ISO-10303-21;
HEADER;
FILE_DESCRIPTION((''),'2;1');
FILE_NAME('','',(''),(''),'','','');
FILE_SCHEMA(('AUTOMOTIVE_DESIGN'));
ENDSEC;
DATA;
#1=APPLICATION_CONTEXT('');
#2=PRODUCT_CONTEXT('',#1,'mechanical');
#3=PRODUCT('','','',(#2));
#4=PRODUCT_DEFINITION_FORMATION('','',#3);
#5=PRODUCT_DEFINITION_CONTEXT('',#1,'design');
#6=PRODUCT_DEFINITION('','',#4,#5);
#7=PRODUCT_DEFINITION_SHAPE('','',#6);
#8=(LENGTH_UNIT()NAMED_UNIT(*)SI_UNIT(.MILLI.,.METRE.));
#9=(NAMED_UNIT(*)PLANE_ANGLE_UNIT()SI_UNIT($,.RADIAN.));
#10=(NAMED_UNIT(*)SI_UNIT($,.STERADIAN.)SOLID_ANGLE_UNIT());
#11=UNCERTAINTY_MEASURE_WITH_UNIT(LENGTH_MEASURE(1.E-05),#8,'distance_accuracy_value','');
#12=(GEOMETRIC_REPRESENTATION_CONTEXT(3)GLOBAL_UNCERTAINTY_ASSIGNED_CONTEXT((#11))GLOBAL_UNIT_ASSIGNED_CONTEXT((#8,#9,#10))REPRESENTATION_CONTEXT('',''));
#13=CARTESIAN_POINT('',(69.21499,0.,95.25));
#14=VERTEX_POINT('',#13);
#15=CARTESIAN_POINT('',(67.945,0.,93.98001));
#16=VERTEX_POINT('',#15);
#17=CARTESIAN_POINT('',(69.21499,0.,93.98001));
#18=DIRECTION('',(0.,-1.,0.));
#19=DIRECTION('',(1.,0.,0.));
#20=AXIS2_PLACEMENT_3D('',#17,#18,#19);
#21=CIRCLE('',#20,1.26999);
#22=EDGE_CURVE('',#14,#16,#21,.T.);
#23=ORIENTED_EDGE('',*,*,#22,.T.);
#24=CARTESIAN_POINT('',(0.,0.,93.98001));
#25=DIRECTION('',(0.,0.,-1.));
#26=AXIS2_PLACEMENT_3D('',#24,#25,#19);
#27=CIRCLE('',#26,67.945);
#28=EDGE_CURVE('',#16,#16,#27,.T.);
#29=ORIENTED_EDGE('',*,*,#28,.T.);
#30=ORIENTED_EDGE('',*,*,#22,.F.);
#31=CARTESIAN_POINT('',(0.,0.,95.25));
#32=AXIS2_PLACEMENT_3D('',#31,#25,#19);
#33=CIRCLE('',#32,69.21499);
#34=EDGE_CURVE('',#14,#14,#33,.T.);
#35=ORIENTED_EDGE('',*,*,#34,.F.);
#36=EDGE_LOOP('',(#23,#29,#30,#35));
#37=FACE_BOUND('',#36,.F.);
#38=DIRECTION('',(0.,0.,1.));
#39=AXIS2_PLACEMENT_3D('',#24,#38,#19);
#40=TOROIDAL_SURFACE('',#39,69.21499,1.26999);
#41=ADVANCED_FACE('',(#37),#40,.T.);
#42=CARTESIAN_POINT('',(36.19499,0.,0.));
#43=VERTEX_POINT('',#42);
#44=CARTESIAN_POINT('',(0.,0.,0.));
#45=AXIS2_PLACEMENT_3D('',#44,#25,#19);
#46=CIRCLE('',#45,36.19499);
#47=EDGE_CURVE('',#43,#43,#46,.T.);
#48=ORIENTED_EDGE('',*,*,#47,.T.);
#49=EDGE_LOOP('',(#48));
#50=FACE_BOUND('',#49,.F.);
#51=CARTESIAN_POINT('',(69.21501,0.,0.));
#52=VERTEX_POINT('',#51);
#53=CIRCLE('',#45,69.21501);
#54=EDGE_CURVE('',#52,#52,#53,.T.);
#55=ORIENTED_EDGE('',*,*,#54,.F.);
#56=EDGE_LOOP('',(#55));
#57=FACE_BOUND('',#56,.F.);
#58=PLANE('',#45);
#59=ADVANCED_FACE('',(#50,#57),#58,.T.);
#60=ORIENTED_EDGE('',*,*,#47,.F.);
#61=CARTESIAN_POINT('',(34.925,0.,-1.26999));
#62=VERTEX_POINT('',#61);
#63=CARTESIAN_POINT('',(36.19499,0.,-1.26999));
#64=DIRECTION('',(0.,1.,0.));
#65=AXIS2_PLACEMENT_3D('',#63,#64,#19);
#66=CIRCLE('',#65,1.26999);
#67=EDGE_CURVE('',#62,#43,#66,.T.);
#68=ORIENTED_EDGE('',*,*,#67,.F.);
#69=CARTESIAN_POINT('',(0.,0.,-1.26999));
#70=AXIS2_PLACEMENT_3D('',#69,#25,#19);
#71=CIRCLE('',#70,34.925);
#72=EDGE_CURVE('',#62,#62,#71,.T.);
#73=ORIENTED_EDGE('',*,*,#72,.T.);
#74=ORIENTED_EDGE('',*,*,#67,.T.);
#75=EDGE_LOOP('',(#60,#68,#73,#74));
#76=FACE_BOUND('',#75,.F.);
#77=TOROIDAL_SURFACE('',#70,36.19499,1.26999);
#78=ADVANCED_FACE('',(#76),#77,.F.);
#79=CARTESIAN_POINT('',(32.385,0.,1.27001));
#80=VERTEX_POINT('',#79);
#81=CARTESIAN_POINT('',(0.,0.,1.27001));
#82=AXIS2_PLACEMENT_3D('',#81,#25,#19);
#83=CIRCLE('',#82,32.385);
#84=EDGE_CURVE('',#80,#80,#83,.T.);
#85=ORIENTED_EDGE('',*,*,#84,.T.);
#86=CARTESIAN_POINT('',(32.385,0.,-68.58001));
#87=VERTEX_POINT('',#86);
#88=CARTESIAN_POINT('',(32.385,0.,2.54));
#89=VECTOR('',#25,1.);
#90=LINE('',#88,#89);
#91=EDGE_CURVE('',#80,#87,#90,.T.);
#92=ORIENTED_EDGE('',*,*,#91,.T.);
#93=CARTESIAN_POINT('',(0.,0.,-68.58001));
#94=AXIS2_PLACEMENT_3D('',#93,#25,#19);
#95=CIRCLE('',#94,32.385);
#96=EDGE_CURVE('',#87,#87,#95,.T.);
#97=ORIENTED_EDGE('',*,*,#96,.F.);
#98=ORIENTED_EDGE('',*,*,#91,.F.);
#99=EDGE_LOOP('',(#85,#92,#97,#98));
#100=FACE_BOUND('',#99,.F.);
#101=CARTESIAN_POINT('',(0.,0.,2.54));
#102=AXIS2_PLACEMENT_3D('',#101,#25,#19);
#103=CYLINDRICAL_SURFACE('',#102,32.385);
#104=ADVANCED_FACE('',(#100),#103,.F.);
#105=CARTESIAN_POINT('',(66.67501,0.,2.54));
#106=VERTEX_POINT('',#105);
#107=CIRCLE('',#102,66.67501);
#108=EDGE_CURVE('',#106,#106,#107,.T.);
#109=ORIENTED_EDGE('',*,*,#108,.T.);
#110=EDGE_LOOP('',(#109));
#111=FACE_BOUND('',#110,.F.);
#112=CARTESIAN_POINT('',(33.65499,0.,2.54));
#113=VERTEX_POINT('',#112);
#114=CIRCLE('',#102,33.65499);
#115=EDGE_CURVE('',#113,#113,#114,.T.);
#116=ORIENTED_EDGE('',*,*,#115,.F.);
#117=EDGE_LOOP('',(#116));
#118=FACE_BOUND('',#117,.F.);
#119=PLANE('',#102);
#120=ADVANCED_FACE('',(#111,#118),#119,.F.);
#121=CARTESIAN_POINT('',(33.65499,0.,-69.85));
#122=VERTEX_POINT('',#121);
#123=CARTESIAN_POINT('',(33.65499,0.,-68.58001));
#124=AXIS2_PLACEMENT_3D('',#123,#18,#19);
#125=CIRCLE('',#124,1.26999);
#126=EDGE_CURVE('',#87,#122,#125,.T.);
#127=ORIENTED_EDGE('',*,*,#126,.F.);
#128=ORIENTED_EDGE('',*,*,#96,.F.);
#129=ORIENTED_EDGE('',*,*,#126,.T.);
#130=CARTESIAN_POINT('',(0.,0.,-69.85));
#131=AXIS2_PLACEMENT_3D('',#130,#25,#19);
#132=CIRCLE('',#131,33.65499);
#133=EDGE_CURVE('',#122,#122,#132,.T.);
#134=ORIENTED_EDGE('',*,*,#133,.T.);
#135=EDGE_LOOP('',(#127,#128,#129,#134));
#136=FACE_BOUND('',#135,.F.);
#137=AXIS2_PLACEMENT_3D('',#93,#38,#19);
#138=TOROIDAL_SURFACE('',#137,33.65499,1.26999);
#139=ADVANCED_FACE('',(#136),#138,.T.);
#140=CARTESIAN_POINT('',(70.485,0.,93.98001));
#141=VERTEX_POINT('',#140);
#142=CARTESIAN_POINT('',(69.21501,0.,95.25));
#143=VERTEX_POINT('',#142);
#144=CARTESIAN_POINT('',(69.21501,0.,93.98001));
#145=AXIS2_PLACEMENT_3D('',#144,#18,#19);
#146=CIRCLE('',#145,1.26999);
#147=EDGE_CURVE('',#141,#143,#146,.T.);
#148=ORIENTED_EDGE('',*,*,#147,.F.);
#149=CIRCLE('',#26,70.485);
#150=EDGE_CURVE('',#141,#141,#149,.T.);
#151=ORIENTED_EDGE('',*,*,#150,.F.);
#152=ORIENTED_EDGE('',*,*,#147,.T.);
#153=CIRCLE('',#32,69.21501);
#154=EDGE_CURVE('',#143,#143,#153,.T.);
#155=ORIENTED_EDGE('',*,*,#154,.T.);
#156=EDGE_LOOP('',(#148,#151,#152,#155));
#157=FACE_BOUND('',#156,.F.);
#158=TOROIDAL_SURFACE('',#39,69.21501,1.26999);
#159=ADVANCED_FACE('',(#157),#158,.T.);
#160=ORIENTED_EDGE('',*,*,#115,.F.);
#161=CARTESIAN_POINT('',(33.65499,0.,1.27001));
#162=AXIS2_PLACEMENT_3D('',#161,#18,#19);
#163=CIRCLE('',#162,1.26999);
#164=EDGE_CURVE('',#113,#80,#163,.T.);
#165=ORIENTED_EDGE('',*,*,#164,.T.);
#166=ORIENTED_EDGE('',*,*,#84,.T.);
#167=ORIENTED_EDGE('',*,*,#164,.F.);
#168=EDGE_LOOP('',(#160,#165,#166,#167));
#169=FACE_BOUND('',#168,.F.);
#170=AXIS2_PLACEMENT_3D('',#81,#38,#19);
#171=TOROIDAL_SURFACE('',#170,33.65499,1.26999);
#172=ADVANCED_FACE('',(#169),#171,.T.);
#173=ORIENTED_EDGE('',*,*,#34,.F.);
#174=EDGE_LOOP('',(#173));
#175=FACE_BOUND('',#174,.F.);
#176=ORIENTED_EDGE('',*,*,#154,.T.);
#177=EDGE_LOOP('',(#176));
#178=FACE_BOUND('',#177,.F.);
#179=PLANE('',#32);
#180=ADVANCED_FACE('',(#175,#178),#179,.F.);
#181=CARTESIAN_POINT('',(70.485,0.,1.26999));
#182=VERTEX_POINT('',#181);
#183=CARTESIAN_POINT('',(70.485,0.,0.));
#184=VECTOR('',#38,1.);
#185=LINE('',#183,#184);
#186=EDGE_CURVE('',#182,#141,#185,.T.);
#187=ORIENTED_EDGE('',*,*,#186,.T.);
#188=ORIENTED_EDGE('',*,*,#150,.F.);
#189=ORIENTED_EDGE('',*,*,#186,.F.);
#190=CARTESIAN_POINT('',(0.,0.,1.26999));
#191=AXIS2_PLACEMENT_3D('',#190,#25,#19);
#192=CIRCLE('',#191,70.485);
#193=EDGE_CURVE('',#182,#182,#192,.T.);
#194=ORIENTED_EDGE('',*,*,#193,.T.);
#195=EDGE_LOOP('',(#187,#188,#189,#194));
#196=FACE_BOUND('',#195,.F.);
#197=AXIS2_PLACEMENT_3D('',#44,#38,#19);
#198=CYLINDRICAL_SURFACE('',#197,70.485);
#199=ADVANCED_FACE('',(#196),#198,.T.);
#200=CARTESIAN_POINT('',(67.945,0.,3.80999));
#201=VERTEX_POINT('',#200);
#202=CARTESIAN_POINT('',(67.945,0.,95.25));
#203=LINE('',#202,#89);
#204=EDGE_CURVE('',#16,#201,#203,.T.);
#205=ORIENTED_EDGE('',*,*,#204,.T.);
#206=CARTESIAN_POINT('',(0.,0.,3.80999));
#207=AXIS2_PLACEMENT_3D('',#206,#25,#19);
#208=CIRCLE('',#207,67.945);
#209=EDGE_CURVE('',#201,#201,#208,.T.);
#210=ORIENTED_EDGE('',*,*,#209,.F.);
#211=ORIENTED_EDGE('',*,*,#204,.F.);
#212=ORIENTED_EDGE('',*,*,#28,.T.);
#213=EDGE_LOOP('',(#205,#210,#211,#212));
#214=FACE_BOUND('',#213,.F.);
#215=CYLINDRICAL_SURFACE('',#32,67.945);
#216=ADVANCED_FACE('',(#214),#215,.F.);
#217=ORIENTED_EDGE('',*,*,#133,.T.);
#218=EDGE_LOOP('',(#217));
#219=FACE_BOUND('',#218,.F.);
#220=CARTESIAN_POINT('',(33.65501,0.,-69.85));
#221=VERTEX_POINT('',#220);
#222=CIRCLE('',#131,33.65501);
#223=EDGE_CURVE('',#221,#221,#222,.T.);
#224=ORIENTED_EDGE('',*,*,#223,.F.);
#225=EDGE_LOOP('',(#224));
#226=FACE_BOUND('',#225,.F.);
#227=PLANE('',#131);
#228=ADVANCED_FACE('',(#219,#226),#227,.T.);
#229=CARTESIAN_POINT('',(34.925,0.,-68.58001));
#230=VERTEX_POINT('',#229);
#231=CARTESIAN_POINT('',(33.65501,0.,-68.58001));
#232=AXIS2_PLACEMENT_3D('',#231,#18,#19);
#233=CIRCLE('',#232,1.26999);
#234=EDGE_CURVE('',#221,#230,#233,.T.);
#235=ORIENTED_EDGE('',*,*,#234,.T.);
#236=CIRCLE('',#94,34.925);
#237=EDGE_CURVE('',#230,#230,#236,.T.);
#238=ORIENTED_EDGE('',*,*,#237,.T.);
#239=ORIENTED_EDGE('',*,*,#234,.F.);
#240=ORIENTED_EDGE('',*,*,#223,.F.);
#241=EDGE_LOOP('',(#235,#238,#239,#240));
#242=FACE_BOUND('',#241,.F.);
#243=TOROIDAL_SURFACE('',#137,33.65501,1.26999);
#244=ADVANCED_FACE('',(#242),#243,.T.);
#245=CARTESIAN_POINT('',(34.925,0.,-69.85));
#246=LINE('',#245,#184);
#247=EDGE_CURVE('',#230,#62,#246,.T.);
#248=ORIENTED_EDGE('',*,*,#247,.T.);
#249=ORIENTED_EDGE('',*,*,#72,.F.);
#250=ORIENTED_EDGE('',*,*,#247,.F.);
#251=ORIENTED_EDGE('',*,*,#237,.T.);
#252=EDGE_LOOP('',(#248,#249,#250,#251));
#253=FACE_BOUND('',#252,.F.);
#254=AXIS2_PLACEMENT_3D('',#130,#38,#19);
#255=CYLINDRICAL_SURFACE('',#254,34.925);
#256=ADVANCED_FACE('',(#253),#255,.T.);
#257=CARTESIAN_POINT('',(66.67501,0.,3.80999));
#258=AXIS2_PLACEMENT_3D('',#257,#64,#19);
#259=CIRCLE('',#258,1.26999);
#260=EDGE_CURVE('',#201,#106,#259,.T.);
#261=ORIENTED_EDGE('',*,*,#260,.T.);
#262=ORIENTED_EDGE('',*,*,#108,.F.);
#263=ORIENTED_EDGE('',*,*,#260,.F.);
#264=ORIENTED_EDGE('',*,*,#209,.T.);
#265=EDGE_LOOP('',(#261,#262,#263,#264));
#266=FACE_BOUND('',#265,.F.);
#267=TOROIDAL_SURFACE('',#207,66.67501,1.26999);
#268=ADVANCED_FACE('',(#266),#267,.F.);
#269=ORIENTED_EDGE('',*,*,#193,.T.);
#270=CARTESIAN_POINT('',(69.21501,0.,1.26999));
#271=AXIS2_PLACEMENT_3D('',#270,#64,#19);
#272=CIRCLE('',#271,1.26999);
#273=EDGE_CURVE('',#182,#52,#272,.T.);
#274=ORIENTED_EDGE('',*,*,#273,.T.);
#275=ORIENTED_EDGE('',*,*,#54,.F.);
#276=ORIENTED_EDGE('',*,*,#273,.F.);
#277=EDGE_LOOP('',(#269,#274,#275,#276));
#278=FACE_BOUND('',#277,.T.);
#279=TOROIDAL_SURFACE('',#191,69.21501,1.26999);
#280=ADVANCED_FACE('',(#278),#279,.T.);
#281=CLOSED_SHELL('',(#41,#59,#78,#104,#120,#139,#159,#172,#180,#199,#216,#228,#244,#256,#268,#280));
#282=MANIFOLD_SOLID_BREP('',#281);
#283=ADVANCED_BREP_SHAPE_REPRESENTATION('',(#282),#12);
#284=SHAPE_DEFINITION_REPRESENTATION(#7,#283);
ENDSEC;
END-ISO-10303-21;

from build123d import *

# Parameters (mm, degrees)
F0_W = 33.02
F0_H = 2.54
F2_R = 1.26999


# Not quite as in the source:
# - a fillet or chamfer is up to 0.001 mm smaller than in the source, because OpenCascade refuses the exact size


with BuildPart() as f1:
    # F0 (on Front) → F1 (revolve)
    with BuildSketch(Plane.XZ):
        Polygon((70.485, 0), (70.485, 95.25), (67.945, 95.25), (67.945, 2.54), (67.945, 0), align=None)
        with Locations((51.435, 1.27)):
            Rectangle(F0_W, F0_H)
        Polygon((34.925, 0), (34.925, 2.54), (32.385, 2.54), (32.385, -69.85), (34.925, -69.85), align=None)
    revolve(axis=Axis((0, 0, -3.7589259446), (0, 0, -1)))

    # F2 (radius 1.27 in the source; OpenCascade refuses exactly that, so slightly less here)
    f2_edges = [f1.edges().sort_by_distance(p)[0] for p in [
        (-67.945, 0, 95.25),
        (-70.485, 0, 95.25),
        (-67.945, 0, 2.54),
        (-70.485, 0, 0),
        (-32.385, 0, -69.85),
        (-32.385, 0, 2.54),
        (-34.925, 0, -69.85),
        (-34.925, 0, 0),
    ]]
    fillet(f2_edges, radius=F2_R)


solid = f1.part
